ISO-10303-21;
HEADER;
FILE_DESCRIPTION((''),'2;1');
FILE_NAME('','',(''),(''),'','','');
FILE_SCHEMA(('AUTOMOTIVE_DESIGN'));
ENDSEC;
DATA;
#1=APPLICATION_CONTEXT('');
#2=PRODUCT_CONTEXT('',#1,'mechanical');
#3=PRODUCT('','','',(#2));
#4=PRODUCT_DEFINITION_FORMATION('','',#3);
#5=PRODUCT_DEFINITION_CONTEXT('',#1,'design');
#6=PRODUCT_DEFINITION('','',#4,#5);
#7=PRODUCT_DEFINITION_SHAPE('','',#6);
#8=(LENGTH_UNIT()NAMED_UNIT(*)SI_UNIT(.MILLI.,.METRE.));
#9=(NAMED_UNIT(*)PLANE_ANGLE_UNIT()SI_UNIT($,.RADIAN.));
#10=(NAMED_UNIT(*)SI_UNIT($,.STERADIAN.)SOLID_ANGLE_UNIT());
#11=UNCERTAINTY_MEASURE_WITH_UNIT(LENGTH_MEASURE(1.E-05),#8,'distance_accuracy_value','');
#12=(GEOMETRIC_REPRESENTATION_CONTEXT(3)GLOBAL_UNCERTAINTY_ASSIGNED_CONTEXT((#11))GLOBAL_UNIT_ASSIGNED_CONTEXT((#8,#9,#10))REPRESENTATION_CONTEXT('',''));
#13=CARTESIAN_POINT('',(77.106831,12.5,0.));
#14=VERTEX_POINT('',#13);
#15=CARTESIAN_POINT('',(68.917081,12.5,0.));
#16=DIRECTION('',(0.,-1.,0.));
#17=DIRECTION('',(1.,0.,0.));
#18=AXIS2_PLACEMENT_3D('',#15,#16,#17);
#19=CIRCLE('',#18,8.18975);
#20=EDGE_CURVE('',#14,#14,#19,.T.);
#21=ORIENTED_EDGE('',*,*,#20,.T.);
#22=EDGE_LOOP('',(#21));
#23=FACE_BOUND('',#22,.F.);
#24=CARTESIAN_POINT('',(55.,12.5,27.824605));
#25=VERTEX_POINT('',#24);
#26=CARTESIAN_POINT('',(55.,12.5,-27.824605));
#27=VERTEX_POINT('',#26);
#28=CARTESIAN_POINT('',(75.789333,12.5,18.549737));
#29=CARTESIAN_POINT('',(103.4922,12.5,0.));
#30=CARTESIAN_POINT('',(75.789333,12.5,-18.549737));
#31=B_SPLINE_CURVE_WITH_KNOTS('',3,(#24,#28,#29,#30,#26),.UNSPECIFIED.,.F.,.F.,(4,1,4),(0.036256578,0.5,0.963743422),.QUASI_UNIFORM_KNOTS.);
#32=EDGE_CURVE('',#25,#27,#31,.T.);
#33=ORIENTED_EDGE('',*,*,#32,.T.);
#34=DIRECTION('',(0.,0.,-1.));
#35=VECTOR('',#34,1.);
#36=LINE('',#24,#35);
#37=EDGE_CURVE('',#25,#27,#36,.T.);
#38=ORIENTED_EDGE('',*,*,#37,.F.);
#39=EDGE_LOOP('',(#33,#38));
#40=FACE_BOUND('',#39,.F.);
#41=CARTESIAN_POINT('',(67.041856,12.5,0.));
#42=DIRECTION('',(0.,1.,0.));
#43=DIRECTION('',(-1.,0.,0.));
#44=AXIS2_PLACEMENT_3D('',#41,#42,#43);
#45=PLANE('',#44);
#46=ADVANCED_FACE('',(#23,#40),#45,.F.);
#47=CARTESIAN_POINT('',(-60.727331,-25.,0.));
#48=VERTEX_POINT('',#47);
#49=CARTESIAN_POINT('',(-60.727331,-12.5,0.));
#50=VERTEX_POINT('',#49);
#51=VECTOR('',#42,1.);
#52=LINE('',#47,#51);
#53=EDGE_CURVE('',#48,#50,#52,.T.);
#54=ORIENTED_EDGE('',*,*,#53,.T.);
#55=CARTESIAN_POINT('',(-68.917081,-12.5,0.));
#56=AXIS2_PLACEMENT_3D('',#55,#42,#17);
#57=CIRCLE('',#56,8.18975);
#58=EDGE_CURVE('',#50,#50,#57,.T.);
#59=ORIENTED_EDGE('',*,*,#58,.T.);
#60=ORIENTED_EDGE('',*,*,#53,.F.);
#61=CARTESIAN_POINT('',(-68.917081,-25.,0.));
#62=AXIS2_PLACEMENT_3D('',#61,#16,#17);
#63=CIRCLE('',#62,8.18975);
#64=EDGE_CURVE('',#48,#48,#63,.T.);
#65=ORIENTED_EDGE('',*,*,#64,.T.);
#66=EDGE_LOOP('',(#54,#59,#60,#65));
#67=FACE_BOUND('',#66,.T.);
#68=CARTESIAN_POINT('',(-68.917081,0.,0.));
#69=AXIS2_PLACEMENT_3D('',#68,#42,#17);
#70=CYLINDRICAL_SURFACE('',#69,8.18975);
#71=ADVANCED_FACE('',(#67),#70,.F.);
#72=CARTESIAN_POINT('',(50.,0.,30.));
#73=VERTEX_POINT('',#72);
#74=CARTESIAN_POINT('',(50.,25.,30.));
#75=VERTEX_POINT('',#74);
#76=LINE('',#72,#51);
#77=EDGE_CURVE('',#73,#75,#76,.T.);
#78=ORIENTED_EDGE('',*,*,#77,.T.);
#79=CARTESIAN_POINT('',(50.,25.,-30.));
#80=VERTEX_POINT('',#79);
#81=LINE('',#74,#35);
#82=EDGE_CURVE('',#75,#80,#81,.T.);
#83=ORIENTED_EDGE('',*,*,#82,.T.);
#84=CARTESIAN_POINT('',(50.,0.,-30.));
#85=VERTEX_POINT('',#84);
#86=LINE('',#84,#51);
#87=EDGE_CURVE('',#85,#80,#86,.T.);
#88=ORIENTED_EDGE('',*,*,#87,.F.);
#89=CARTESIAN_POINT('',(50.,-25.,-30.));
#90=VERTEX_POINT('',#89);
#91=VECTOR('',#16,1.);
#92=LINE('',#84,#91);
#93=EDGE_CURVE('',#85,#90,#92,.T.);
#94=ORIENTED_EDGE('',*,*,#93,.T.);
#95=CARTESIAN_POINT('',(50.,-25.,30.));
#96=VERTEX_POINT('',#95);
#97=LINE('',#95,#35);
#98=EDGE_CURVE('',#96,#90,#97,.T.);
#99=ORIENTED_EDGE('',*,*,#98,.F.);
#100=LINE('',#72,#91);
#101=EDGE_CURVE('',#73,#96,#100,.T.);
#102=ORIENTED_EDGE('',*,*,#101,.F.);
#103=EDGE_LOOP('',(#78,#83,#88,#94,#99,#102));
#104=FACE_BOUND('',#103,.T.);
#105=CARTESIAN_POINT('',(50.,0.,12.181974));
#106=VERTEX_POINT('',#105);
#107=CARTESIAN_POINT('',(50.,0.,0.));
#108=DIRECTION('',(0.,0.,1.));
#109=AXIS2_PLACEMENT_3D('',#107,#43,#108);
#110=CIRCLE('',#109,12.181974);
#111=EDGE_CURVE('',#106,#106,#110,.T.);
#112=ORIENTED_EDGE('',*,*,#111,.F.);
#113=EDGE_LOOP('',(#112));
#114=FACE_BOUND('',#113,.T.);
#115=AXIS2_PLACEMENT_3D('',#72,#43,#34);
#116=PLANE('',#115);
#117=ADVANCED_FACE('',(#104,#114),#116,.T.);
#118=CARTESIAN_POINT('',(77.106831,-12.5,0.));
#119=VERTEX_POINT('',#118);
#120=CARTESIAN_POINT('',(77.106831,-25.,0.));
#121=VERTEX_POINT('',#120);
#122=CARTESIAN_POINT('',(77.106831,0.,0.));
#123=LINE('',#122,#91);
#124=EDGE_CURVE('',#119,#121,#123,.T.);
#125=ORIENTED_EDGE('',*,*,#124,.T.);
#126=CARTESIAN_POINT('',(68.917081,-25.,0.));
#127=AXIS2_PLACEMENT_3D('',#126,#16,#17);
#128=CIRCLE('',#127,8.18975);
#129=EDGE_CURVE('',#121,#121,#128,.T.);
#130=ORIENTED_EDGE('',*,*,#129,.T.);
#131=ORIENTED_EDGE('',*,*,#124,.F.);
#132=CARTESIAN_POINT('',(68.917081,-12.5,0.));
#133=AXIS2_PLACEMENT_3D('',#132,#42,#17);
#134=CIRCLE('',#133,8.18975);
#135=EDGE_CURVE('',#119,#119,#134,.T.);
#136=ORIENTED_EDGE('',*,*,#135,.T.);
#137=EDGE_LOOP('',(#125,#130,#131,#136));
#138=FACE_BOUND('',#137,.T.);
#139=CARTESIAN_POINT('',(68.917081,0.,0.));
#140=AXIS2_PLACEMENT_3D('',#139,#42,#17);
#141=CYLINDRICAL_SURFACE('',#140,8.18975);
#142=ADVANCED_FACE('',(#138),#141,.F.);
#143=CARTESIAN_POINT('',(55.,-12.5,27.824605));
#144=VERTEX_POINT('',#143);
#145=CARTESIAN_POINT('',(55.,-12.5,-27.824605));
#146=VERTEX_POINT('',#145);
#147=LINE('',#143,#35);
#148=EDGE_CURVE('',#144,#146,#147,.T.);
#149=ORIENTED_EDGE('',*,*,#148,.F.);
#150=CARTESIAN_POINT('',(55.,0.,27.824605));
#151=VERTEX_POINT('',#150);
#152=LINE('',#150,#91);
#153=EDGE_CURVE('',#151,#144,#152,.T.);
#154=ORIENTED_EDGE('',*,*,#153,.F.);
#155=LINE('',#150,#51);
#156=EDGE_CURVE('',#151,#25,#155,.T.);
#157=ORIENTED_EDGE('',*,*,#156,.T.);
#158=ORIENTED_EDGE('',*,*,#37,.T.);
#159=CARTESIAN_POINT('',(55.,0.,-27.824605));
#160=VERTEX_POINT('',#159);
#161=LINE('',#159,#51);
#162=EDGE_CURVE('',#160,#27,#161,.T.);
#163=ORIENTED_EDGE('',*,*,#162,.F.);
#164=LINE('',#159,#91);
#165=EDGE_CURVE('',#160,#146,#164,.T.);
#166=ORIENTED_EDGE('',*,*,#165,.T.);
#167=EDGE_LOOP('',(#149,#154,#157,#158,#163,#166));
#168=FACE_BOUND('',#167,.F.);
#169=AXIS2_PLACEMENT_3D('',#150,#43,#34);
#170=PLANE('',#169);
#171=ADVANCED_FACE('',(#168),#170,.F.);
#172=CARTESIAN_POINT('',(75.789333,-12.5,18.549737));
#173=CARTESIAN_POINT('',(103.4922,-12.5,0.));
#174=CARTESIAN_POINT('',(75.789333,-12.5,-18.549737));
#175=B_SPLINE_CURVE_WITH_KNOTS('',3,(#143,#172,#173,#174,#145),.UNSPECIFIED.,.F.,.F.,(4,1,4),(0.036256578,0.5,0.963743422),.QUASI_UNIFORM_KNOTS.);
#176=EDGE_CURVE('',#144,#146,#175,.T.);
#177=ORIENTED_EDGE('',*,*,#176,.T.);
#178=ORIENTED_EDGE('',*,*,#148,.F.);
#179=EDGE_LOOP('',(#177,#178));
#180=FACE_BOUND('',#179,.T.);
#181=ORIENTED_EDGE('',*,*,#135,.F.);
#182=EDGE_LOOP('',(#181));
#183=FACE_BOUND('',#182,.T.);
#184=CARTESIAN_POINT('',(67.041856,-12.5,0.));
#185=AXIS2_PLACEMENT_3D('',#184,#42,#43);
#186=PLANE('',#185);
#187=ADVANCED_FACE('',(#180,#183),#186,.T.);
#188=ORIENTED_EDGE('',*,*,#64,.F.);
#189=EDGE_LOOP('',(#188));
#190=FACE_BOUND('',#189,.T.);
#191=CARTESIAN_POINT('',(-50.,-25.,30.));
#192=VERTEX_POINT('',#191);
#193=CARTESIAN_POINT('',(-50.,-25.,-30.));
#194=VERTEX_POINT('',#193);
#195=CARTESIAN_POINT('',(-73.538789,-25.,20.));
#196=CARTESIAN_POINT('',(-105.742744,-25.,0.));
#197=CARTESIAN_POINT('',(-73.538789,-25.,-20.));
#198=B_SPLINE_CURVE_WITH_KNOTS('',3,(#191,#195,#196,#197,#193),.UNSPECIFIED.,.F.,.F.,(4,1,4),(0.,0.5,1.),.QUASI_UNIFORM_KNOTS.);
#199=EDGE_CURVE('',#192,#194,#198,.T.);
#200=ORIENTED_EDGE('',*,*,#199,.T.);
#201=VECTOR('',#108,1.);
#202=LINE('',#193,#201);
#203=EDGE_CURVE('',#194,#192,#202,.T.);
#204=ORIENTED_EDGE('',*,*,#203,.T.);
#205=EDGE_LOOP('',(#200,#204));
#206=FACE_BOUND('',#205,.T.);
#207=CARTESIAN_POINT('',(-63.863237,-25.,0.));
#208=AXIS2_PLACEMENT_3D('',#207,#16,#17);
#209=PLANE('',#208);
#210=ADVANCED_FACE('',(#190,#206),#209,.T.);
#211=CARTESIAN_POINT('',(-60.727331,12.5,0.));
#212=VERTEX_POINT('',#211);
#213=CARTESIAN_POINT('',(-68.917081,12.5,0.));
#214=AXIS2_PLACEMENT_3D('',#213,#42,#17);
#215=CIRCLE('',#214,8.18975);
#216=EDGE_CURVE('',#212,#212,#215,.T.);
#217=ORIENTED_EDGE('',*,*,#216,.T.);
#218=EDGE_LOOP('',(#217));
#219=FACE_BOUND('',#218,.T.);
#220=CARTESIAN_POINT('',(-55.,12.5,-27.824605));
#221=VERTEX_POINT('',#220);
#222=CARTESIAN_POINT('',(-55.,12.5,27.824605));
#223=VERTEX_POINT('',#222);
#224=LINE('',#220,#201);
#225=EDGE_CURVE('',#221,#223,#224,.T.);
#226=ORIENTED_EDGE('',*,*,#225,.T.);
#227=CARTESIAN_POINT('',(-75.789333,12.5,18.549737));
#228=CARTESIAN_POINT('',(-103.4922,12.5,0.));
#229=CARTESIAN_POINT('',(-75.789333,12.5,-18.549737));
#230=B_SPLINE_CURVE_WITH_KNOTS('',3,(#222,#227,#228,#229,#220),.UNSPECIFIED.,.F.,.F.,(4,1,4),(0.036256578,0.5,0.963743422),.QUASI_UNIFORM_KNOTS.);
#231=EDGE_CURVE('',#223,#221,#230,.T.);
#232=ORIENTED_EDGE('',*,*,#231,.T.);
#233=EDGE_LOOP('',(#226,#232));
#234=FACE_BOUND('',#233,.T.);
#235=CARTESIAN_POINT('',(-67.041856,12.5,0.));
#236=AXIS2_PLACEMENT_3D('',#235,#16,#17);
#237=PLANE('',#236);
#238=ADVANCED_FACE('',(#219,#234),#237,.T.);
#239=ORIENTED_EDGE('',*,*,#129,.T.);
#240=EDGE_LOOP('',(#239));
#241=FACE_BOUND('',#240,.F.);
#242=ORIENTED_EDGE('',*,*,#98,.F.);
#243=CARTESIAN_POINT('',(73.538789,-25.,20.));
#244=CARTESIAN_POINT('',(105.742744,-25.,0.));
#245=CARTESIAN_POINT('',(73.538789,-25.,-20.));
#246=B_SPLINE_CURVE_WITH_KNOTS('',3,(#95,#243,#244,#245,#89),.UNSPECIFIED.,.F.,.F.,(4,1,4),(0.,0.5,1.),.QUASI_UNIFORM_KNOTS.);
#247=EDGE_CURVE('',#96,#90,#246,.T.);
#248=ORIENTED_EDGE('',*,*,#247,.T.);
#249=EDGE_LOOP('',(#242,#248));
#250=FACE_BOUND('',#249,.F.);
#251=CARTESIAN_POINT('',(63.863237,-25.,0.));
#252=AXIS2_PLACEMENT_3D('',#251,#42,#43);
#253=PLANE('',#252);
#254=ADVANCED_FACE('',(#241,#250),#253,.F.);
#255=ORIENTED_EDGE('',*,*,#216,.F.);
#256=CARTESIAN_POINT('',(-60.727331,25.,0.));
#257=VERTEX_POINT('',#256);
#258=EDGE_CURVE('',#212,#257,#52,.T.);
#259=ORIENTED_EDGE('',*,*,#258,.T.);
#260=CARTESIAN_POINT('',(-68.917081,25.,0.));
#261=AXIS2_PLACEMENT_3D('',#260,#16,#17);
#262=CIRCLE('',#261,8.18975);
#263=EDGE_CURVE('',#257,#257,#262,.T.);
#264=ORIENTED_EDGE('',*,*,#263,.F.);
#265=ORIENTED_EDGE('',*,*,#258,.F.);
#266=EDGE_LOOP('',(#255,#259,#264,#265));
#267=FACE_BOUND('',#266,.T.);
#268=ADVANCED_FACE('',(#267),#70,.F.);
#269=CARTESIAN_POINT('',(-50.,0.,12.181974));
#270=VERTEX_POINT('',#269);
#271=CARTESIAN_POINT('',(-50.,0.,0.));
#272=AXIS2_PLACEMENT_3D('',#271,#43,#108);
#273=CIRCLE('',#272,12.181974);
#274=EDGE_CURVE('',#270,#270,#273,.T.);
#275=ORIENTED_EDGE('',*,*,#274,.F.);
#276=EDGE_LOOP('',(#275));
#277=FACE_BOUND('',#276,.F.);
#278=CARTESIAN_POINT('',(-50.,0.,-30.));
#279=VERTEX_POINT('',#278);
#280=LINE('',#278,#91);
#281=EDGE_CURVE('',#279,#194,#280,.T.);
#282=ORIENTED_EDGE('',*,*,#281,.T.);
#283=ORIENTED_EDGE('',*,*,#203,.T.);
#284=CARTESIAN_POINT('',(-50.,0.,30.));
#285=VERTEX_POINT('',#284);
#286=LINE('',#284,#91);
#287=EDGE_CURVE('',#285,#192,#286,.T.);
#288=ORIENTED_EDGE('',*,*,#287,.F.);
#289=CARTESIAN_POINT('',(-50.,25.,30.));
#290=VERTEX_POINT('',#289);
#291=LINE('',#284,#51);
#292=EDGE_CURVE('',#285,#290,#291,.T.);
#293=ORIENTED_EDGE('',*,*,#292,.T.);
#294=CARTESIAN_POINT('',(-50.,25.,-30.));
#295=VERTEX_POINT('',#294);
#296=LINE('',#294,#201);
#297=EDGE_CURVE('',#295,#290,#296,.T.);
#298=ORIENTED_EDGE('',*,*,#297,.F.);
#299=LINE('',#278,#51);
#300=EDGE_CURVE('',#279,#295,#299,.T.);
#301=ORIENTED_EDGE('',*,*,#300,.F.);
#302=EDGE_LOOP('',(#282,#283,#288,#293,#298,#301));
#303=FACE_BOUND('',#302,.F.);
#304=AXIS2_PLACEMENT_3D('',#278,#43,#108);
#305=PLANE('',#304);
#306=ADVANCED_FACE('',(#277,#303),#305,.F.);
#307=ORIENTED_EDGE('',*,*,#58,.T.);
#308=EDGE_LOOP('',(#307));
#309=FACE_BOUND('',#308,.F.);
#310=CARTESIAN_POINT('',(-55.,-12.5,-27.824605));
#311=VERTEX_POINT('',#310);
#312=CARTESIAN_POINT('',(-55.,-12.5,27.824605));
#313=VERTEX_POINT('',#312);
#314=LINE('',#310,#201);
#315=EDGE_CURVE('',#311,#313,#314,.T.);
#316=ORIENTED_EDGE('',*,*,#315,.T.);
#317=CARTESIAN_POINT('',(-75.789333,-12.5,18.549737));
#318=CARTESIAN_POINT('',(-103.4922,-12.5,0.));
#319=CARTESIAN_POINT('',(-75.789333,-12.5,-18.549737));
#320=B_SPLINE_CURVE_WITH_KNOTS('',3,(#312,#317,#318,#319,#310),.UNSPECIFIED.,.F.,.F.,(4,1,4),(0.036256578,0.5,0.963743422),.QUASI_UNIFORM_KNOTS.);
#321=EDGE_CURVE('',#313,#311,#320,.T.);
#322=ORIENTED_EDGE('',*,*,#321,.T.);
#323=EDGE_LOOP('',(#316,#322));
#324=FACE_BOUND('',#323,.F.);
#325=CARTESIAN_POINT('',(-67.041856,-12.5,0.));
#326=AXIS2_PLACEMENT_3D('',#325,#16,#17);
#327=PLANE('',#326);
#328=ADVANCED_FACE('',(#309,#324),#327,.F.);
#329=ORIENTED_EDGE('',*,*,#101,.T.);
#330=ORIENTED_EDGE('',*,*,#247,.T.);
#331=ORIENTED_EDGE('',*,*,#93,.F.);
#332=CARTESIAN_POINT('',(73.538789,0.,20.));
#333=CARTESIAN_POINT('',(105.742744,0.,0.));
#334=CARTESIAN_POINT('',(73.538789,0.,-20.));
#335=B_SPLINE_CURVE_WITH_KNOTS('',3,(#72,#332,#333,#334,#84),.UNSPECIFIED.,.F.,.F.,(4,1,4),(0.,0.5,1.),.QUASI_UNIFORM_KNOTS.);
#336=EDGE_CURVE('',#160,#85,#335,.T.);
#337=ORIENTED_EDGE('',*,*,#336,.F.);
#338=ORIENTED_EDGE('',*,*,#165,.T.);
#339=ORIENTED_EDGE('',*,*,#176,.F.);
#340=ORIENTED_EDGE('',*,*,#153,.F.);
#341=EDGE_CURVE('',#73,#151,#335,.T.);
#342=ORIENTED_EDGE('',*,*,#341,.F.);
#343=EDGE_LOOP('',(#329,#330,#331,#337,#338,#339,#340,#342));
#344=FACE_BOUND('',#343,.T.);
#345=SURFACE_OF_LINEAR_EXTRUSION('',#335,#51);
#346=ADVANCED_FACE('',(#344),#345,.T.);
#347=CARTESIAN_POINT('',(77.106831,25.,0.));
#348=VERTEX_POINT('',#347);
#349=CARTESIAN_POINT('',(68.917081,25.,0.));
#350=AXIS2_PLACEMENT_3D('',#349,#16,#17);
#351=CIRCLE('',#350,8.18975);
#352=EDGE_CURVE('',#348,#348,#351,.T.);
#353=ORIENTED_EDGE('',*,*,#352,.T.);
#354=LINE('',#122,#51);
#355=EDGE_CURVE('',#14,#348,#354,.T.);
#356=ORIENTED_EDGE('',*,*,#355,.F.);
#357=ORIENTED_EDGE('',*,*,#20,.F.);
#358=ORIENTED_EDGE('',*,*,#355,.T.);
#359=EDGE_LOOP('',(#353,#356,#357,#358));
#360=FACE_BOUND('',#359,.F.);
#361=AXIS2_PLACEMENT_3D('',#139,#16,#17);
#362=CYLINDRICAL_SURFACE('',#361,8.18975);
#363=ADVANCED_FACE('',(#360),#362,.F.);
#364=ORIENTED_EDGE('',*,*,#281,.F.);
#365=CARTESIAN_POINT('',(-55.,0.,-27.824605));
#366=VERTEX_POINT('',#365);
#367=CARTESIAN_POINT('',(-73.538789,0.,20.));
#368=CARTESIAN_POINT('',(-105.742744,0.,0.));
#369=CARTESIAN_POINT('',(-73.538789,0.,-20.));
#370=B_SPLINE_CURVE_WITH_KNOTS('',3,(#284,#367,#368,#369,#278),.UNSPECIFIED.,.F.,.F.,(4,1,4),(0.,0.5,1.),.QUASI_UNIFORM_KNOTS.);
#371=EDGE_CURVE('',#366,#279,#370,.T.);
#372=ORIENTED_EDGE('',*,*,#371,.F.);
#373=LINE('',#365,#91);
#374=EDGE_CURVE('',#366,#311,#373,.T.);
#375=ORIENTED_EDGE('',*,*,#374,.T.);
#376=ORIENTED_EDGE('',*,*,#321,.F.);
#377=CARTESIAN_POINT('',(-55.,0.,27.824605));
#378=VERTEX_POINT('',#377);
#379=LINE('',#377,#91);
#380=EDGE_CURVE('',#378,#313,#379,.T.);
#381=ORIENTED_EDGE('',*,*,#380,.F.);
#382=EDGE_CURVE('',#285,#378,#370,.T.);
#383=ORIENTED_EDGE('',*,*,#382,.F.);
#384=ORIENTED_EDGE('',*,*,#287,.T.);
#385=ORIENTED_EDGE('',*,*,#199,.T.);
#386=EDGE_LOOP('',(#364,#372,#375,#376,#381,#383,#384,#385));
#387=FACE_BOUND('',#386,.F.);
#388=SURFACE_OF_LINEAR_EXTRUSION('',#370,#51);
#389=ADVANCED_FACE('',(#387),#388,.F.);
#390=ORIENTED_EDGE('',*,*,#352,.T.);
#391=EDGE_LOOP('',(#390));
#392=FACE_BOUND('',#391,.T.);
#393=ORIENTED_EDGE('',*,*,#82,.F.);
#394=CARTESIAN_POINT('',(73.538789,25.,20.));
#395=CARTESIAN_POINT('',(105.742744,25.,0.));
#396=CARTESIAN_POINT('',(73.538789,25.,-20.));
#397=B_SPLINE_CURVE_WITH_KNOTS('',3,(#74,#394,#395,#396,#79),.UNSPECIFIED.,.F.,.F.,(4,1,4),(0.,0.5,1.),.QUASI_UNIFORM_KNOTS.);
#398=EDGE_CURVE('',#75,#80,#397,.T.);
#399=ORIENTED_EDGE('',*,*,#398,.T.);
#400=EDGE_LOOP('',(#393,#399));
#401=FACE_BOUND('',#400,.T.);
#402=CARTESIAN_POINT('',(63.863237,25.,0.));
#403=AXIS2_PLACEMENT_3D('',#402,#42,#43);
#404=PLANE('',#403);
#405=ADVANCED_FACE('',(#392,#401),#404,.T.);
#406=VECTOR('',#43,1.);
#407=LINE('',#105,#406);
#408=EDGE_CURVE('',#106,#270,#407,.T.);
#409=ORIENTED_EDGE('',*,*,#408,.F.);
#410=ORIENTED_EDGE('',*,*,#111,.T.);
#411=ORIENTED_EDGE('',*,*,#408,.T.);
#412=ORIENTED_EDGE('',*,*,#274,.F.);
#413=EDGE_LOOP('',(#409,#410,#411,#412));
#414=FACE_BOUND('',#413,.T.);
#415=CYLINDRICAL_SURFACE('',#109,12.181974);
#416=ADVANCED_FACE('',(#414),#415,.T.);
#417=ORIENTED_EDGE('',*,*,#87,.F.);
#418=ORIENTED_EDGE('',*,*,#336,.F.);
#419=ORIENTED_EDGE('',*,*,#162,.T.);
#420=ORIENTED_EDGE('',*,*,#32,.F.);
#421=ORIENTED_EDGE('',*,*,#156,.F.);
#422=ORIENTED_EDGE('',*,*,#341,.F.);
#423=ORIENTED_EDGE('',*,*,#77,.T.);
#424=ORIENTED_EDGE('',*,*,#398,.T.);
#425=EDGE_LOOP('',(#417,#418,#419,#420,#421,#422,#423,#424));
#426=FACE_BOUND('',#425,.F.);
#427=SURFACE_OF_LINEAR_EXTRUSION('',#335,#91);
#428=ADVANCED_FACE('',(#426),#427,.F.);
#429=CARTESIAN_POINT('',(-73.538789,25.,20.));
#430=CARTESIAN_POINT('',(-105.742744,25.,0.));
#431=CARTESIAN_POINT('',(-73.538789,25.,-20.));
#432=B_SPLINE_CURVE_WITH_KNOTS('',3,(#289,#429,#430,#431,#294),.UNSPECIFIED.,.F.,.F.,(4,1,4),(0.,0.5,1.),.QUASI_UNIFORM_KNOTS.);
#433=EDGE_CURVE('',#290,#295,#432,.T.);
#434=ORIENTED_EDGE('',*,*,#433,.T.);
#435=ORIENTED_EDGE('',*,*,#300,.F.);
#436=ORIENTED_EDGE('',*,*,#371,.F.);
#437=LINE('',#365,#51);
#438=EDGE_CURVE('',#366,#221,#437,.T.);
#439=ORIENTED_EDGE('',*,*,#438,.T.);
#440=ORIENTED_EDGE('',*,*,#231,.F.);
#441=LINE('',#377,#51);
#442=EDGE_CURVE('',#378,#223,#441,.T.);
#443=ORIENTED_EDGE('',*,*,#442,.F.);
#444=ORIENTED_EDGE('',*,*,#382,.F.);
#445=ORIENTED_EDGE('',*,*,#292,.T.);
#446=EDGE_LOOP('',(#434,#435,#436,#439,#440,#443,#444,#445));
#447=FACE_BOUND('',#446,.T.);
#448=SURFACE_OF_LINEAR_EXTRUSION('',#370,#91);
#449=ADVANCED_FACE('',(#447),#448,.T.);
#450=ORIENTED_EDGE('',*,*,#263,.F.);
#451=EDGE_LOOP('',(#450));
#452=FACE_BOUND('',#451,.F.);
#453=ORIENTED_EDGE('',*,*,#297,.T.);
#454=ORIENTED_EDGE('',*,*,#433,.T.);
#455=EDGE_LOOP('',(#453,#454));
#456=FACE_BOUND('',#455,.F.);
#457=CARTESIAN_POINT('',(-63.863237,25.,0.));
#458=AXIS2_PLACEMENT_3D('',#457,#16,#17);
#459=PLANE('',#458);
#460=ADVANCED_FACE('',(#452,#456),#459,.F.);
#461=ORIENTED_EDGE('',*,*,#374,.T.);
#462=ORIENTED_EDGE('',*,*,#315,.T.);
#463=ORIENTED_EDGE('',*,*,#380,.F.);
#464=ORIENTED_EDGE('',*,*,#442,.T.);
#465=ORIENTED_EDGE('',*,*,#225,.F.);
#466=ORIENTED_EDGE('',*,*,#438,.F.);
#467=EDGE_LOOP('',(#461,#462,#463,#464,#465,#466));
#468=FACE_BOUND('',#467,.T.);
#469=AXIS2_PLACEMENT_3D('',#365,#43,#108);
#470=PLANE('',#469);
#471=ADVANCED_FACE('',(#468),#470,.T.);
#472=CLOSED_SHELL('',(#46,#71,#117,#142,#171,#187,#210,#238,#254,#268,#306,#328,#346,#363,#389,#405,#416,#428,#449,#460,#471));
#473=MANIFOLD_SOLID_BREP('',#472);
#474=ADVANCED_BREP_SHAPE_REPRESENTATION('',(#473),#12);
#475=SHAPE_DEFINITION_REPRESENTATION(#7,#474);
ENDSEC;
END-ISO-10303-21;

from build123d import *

# Parameters (mm, degrees)
F2_R     = 8.189749857
F3_DEPTH = 25
F5_DEPTH = 12.5


with BuildPart() as f1:
    # F0 (on Front) → F1 (revolve)
    with BuildSketch(Plane.XZ):
        Polygon((0, 12.1819740161), (-50, 12.1819740161), (-50, 0), (50, 0), (50, 12.1819740161), align=None)
    revolve(axis=Axis((74.9588809907, 0, 0), (-1, 0, 0)))

    # F2 (on Front) → F3 (join, symmetric)
    with BuildSketch(Plane.XZ):
        with BuildLine():
            Line((-50, -30), (-50, 30))
            add(Edge.make_bspline(
                [(-50, 30), (-73.5387891531, 20), (-105.7427436113, 0), (-73.5387891531, -20), (-50, -30)],
                knots=[0, 0, 0, 0, 0.5, 1, 1, 1, 1], degree=3))
        make_face()
        with Locations((-68.91708076, 0)):
            Circle(F2_R, mode=Mode.SUBTRACT)
        with BuildLine():
            add(Edge.make_bspline(
                [(50, 30), (73.5387891531, 20), (105.7427436113, 0), (73.5387891531, -20), (50, -30)],
                knots=[0, 0, 0, 0, 0.5, 1, 1, 1, 1], degree=3))
            Line((50, 30), (50, -30))
        make_face()
        with Locations((68.91708076, 0)):
            Circle(F2_R, mode=Mode.SUBTRACT)
    extrude(amount=F3_DEPTH, both=True)

    # F4 (on Front) → F5 (cut, symmetric)
    with BuildSketch(Plane.XZ):
        with BuildLine():
            Line((-55, -27.8246053089), (-55, 27.8246053089))
            add(Edge.make_bspline(
                [(-55, 27.8246053089), (-75.7893328005, 18.5497368726), (-103.492199964, -1e-10), (-75.7893328003, -18.5497368728), (-54.9999999995, -27.8246053091)],
                knots=[0.0362565782, 0.0362565782, 0.0362565782, 0.0362565782, 0.5, 0.9637434218, 0.9637434218, 0.9637434218, 0.9637434218], degree=3))
        make_face()
        with BuildLine():
            add(Edge.make_bspline(
                [(55, 27.8246053089), (75.7893328005, 18.5497368726), (103.492199964, -1e-10), (75.7893328003, -18.5497368728), (54.9999999995, -27.8246053091)],
                knots=[0.0362565782, 0.0362565782, 0.0362565782, 0.0362565782, 0.5, 0.9637434218, 0.9637434218, 0.9637434218, 0.9637434218], degree=3))
            Line((55, 27.8246053089), (55, -27.8246053089))
        make_face()
    extrude(amount=F5_DEPTH, both=True, mode=Mode.SUBTRACT)


solid = f1.part
